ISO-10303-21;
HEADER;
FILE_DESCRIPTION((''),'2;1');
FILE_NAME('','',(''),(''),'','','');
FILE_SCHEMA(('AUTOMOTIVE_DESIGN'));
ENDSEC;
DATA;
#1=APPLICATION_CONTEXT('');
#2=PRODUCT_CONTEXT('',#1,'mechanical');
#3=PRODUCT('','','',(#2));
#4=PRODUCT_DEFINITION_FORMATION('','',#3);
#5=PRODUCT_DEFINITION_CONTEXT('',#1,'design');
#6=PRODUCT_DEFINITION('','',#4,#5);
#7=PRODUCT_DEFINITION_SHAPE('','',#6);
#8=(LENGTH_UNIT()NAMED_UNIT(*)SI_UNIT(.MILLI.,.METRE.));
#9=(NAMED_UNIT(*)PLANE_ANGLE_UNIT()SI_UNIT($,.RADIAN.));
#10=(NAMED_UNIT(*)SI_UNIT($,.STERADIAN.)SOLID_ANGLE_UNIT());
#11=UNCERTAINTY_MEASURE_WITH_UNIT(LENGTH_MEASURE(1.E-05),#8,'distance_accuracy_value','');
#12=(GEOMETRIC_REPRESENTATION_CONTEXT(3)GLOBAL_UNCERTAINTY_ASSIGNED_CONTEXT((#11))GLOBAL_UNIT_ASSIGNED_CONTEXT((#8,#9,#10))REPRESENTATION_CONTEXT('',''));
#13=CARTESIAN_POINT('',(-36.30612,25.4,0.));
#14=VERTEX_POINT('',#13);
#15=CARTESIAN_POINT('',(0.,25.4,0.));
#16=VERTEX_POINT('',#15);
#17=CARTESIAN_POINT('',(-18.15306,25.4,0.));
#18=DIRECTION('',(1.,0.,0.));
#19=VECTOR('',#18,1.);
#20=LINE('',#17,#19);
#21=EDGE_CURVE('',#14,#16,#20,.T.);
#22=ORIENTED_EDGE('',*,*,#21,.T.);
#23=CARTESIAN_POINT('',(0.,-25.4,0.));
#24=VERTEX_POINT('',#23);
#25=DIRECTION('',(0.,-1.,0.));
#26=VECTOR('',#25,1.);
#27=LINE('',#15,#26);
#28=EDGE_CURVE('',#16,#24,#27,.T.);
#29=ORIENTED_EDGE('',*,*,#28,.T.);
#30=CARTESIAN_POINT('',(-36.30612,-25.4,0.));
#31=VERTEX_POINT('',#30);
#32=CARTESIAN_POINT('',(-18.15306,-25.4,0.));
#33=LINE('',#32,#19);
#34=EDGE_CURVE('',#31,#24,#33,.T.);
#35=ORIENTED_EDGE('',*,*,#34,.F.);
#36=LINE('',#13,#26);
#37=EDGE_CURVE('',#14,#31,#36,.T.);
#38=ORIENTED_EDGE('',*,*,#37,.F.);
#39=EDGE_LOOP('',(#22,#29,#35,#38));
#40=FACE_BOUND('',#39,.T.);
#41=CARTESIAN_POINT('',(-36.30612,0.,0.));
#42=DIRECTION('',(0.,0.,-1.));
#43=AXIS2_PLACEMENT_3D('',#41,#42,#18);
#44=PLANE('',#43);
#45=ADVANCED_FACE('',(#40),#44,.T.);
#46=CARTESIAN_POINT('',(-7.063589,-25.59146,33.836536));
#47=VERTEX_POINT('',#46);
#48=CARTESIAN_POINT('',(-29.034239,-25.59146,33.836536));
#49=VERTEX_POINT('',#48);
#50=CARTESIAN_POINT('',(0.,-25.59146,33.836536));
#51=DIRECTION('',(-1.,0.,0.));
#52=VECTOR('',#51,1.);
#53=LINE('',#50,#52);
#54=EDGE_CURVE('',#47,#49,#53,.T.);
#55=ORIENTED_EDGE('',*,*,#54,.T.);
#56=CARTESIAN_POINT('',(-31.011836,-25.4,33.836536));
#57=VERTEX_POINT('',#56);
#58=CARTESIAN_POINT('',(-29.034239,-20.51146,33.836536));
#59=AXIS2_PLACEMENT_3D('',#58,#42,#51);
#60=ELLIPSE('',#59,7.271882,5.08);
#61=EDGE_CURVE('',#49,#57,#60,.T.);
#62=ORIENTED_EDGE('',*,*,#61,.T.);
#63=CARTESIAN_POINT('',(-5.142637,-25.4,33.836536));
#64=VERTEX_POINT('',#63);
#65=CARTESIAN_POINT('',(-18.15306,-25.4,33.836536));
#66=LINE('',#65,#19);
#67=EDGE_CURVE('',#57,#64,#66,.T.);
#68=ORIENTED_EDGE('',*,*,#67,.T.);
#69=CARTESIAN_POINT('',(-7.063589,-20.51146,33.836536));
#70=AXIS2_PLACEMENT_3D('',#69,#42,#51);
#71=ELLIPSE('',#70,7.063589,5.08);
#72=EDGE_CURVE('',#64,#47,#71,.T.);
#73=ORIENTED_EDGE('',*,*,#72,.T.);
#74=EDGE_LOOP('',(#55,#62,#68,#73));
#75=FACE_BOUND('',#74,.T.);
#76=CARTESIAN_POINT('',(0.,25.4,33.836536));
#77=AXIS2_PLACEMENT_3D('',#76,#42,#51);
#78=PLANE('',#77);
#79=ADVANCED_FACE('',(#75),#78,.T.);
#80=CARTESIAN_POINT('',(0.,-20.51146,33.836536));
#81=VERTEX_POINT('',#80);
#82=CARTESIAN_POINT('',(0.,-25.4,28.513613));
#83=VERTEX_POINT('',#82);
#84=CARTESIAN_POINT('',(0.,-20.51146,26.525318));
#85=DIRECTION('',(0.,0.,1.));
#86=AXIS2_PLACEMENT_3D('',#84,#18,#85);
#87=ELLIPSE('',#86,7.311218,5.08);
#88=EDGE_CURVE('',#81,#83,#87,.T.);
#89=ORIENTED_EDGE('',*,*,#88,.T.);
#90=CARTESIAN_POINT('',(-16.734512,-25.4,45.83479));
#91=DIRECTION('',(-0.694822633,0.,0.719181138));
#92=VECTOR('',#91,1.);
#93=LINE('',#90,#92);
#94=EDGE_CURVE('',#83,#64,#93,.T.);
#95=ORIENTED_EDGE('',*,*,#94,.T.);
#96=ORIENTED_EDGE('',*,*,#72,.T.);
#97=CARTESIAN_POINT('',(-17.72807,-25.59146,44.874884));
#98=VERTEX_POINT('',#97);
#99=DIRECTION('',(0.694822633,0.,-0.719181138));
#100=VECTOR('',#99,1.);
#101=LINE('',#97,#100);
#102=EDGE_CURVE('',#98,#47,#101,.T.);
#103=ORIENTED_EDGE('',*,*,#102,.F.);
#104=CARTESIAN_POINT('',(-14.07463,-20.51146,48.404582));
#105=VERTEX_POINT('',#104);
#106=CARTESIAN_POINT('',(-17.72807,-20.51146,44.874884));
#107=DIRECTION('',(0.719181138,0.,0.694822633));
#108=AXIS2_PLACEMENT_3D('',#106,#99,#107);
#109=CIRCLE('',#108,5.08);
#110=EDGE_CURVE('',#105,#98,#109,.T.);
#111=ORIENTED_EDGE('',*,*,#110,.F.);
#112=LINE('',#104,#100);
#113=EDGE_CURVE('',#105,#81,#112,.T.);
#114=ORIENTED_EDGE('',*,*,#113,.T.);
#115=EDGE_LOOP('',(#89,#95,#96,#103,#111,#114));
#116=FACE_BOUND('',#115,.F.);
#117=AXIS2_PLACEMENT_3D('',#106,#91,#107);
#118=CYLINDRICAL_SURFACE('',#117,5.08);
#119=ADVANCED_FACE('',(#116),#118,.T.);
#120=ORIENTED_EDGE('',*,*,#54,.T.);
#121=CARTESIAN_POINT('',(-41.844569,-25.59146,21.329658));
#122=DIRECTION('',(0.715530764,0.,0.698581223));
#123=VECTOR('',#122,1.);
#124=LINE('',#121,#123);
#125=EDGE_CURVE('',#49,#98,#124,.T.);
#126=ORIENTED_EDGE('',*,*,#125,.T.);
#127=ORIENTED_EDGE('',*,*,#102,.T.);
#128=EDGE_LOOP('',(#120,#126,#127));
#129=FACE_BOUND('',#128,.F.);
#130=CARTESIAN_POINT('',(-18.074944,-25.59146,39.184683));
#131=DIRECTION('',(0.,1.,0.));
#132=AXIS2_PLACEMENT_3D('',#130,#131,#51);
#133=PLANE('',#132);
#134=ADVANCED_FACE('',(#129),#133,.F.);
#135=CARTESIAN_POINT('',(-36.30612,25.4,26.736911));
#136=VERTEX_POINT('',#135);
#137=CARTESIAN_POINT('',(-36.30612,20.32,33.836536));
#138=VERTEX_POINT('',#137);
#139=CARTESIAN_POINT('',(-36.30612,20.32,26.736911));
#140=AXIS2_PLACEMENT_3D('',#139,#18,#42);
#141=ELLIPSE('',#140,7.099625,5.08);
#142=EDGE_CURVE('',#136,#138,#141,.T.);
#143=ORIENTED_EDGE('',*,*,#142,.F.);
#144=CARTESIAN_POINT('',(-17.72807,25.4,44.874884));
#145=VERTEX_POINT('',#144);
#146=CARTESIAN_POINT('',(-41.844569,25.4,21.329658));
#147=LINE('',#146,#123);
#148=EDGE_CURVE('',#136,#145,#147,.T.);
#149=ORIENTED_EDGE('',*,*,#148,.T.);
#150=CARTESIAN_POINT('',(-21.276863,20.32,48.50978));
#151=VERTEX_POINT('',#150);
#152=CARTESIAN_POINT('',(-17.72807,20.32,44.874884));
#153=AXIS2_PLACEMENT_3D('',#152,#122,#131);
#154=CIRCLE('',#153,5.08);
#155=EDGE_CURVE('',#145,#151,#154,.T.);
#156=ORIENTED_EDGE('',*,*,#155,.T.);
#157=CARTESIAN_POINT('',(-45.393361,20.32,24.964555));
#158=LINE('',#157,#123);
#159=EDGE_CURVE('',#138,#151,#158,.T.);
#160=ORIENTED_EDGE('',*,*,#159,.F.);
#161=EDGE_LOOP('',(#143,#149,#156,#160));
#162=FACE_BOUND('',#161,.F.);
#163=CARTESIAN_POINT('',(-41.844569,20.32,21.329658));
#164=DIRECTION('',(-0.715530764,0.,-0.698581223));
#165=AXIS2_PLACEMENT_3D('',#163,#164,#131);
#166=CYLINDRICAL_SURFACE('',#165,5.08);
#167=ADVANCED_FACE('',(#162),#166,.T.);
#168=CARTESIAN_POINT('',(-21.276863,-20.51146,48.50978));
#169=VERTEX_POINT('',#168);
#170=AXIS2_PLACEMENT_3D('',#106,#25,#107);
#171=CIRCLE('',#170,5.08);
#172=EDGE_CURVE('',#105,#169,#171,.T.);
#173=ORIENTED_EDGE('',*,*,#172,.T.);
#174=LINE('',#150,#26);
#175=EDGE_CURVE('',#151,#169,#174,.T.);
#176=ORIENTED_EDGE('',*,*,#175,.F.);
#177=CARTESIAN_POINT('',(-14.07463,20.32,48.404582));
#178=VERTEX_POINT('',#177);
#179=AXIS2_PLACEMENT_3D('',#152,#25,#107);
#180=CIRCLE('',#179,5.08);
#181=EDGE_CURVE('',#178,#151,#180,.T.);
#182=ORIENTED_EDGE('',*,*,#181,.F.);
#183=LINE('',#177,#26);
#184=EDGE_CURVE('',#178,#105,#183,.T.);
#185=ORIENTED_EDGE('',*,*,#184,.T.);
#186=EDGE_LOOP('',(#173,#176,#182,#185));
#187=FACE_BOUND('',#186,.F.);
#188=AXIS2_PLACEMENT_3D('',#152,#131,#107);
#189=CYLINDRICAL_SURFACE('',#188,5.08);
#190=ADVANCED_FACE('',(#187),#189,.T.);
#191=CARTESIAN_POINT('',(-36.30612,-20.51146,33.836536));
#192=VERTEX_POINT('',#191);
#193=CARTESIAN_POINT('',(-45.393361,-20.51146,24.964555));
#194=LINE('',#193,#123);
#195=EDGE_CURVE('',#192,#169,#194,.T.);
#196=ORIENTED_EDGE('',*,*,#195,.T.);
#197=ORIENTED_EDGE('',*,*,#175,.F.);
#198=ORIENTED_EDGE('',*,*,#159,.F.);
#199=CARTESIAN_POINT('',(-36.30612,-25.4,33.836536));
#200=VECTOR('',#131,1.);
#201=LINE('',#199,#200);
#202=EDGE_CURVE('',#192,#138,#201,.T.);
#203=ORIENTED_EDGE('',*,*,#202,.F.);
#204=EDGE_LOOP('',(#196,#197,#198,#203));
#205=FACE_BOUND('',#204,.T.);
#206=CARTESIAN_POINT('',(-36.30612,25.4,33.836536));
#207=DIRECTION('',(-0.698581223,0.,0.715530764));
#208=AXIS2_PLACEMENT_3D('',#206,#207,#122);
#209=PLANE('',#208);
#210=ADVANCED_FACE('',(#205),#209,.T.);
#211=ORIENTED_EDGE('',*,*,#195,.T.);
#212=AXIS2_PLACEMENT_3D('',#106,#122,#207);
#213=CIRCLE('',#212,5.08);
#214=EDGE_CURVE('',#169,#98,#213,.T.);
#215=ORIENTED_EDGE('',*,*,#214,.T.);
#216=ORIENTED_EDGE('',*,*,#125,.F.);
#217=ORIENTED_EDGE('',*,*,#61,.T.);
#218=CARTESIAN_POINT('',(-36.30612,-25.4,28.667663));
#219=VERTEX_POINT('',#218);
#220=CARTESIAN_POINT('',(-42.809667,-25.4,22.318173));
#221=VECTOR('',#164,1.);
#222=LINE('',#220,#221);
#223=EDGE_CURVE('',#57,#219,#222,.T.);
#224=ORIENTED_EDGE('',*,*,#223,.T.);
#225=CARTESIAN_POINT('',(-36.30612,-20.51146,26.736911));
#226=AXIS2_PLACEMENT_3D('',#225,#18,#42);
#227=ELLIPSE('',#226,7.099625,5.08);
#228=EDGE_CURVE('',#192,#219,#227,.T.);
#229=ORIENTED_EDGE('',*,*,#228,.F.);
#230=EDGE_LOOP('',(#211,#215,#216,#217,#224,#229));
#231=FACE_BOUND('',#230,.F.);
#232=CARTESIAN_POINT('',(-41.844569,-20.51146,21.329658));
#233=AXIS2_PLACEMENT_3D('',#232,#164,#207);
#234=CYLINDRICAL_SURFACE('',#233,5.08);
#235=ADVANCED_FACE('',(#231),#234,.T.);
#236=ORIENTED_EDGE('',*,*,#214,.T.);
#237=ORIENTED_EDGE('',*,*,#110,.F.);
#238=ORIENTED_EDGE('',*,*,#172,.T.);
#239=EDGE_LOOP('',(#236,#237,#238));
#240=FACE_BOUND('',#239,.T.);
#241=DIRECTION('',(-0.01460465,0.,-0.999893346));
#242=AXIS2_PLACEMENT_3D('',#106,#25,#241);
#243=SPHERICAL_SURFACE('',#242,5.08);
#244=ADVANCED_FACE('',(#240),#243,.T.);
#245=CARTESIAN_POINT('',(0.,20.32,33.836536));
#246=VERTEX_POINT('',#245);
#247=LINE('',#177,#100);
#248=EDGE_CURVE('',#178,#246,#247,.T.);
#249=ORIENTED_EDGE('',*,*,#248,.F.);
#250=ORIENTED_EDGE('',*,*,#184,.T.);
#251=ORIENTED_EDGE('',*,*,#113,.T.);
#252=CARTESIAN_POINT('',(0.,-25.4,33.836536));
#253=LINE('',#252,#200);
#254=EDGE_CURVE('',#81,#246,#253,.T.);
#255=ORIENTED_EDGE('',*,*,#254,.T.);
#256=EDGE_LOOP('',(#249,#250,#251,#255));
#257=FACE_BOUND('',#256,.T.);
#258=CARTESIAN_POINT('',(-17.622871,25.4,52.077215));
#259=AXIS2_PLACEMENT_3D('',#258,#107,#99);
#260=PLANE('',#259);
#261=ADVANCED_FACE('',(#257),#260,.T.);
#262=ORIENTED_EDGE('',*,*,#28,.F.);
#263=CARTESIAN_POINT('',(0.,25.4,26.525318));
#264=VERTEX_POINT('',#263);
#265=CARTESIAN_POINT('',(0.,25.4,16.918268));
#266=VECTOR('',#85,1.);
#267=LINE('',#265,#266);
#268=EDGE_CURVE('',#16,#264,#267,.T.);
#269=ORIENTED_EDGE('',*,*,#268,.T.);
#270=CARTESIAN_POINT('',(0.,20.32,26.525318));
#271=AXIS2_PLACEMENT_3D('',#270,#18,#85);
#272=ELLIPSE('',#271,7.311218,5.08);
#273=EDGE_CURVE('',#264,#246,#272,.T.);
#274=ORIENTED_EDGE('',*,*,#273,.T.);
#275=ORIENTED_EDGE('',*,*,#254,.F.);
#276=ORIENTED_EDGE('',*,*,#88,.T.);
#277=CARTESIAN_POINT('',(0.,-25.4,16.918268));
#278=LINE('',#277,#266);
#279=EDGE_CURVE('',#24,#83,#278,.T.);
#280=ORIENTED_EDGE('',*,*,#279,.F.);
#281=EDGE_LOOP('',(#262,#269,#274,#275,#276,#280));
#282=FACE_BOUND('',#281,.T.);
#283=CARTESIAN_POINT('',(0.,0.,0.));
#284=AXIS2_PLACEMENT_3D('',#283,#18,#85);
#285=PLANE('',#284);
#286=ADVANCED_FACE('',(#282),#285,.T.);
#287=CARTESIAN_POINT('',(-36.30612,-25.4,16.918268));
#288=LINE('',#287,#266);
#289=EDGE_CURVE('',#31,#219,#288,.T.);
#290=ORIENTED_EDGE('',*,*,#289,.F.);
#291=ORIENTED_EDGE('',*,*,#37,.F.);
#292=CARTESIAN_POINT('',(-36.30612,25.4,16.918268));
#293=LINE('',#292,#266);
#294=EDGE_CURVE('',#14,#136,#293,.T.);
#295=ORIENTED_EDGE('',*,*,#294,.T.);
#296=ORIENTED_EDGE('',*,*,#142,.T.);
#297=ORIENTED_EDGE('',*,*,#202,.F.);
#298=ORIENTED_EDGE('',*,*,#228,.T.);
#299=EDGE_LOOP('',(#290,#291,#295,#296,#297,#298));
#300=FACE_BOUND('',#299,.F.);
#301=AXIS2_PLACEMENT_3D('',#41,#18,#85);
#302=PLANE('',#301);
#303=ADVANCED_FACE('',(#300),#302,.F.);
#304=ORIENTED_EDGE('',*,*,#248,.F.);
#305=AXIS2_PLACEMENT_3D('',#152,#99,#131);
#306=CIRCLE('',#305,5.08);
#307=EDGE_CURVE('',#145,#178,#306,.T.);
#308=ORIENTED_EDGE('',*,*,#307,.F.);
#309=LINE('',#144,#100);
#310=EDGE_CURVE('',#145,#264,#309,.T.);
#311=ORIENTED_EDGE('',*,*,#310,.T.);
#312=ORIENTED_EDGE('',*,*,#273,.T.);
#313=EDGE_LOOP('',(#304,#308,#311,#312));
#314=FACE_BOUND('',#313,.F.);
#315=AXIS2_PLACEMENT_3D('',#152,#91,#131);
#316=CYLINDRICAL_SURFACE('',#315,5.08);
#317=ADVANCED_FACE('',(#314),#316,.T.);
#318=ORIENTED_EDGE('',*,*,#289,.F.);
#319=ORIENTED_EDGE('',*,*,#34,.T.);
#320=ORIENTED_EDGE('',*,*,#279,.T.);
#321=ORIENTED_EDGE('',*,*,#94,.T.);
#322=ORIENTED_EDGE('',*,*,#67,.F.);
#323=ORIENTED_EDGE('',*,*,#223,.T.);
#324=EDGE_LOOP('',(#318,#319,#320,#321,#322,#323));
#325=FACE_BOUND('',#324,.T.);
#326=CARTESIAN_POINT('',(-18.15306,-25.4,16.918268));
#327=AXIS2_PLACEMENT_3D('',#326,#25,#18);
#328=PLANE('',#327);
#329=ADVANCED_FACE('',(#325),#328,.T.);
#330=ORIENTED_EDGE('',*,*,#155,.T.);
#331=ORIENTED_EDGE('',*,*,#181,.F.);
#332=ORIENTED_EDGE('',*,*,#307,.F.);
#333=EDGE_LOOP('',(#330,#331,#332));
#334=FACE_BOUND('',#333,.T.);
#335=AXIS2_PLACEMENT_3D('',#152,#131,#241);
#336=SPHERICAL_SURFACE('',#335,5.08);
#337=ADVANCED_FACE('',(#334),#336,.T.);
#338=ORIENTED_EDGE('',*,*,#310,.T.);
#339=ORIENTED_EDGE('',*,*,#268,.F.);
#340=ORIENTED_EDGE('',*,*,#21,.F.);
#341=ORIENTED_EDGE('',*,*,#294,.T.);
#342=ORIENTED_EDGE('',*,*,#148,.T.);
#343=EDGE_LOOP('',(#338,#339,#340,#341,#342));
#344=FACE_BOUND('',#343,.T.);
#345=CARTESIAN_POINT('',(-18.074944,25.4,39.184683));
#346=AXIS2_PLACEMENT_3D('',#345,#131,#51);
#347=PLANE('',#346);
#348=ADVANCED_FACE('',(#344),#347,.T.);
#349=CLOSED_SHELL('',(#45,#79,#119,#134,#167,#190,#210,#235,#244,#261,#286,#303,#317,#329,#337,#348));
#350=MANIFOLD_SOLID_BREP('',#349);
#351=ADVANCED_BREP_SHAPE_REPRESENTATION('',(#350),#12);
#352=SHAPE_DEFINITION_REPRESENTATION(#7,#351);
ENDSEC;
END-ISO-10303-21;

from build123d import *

# Parameters (mm, degrees)
F0_W         = 36.3061204553
F0_H         = 33.8365361094
F1_DEPTH     = 25.4
F5_DEPTH     = 50.99146
F7_T1_DEPTH  = 32.9564355705
F7_T3_DEPTH  = 33.7043488182
F7_T5_DEPTH  = 40.83146
F7_T10_DEPTH = 5.08
F7_T16_DEPTH = 5.08


# Not quite as in the source:
# - a fillet or chamfer that OpenCascade refuses, or shapes differently, is made with other operations: its cross-section is extruded or revolved along the edge and cut away or added
# - a feature of the source that left no trace in its solid (it failed there, or was rolled back) is left out


with BuildPart() as f1:
    # F0 (on Front) → F1 (new body, symmetric)
    with BuildSketch(Plane.XZ):
        with Locations((-18.1530602276, 16.9182680547)):
            Rectangle(F0_W, F0_H)
    extrude(amount=F1_DEPTH, both=True)

    # F3 (on face) → F5 (join)
    with BuildSketch(Plane(origin=(0, 25.4, 0), x_dir=(-1, 0, 0), z_dir=(0, 1, 0))):
        Polygon((36.3061204553, 33.8365361094), (17.6228713244, 52.0772151649), (0, 33.8365361094), align=None)
    extrude(amount=-F5_DEPTH)

    # F7: fillet of radius 5.08 on 5 edges, made by hand

    # F7_s2 → F7_t1 (cut)
    with BuildSketch(Plane(origin=(-30.9828597215, 0, 32.0690306362), x_dir=(0, 1, 0), z_dir=(0.6948226329, 0, -0.7191811377))):
        with BuildLine():
            ThreePointArc((-20.51146, 23.510391109), (-24.1035624484, 22.0224935574), (-25.59146, 18.430391109))
            Line((-25.59146, 18.430391109), (-25.59146, 23.510391109))
            Line((-25.59146, 23.510391109), (-20.51146, 23.510391109))
        make_face()
        with BuildLine():
            ThreePointArc((25.4, 18.430391109), (23.9121024484, 22.0224935574), (20.32, 23.510391109))
            Line((20.32, 23.510391109), (25.4, 23.510391109))
            Line((25.4, 23.510391109), (25.4, 18.430391109))
        make_face()
    extrude(amount=F7_T1_DEPTH, mode=Mode.SUBTRACT)

    # F7_s4 → F7_t3 (cut)
    with BuildSketch(Plane(origin=(-10.7619958041, 0, -10.507064916), x_dir=(0, 1, 0), z_dir=(0.7155307644, 0, 0.698581223))):
        with BuildLine():
            ThreePointArc((25.4, 44.4938565788), (23.9121024484, 48.0859590272), (20.32, 49.5738565788))
            Line((20.32, 49.5738565788), (25.4, 49.5738565788))
            Line((25.4, 49.5738565788), (25.4, 44.4938565788))
        make_face()
        with BuildLine():
            ThreePointArc((-20.51146, 49.5738565788), (-24.1035624484, 48.0859590272), (-25.59146, 44.4938565788))
            Line((-25.59146, 44.4938565788), (-25.59146, 49.5738565788))
            Line((-25.59146, 49.5738565788), (-20.51146, 49.5738565788))
        make_face()
    extrude(amount=F7_T3_DEPTH, mode=Mode.SUBTRACT)

    # F7_s6 → F7_t5 (cut)
    with BuildSketch(Plane.XZ.offset(-20.32)):
        with BuildLine():
            ThreePointArc((-14.074629897, 48.4045824879), (-17.6538784549, 49.9543417124), (-21.2768626893, 48.5097797958))
            Line((-21.2768626893, 48.5097797958), (-17.6228713244, 52.0772151649))
            Line((-17.6228713244, 52.0772151649), (-14.074629897, 48.4045824879))
        make_face()
    extrude(amount=F7_T5_DEPTH, mode=Mode.SUBTRACT)


with BuildPart() as f7_tool8:
    # F7_s9 → F7_t10 (new body)
    with BuildSketch(Plane.XZ.offset(20.51146)):
        Polygon((-17.7280700763, 44.8748835126), (-14.074629897, 48.4045824879), (-17.6228713244, 52.0772151649), (-21.2768626893, 48.5097797958), align=None)
    extrude(amount=F7_T10_DEPTH)

    # F7_s11 → F7_t12 (revolve, cut)
    with BuildSketch(Plane(origin=(-17.7280700763, -20.51146, 44.8748835126), x_dir=(-0.0146046499, 0, -0.9998933464), z_dir=(-0.9998933464, 0, 0.0146046499))):
        with BuildLine():
            ThreePointArc((0, -5.08), (5.08, 0), (0, 5.08))
            Line((0, 5.08), (0, -5.08))
        make_face()
    revolve(axis=Axis((-17.7280700763, -20.51146, 44.8748835126), (0, -1, 0)), mode=Mode.SUBTRACT)


with BuildPart() as f1_1:
    add(f1.part)

    # F7_t7: cut F7_tool8
    add(f7_tool8.part, mode=Mode.SUBTRACT)


with BuildPart() as f7_tool14:
    # F7_s15 → F7_t16 (new body)
    with BuildSketch(Plane.XZ.offset(-20.32)):
        Polygon((-17.7280700763, 44.8748835126), (-14.074629897, 48.4045824879), (-17.6228713244, 52.0772151649), (-21.2768626893, 48.5097797958), align=None)
    extrude(amount=-F7_T16_DEPTH)

    # F7_s17 → F7_t18 (revolve, cut)
    with BuildSketch(Plane(origin=(-17.7280700763, 20.32, 44.8748835126), x_dir=(-0.0146046499, 0, -0.9998933464), z_dir=(0.9998933464, 0, -0.0146046499))):
        with BuildLine():
            ThreePointArc((0, -5.08), (5.08, 0), (0, 5.08))
            Line((0, 5.08), (0, -5.08))
        make_face()
    revolve(axis=Axis((-17.7280700763, 20.32, 44.8748835126), (0, 1, 0)), mode=Mode.SUBTRACT)


with BuildPart() as f1_2:
    add(f1_1.part)

    # F7_t13: cut F7_tool14
    add(f7_tool14.part, mode=Mode.SUBTRACT)


solid = f1_2.part
